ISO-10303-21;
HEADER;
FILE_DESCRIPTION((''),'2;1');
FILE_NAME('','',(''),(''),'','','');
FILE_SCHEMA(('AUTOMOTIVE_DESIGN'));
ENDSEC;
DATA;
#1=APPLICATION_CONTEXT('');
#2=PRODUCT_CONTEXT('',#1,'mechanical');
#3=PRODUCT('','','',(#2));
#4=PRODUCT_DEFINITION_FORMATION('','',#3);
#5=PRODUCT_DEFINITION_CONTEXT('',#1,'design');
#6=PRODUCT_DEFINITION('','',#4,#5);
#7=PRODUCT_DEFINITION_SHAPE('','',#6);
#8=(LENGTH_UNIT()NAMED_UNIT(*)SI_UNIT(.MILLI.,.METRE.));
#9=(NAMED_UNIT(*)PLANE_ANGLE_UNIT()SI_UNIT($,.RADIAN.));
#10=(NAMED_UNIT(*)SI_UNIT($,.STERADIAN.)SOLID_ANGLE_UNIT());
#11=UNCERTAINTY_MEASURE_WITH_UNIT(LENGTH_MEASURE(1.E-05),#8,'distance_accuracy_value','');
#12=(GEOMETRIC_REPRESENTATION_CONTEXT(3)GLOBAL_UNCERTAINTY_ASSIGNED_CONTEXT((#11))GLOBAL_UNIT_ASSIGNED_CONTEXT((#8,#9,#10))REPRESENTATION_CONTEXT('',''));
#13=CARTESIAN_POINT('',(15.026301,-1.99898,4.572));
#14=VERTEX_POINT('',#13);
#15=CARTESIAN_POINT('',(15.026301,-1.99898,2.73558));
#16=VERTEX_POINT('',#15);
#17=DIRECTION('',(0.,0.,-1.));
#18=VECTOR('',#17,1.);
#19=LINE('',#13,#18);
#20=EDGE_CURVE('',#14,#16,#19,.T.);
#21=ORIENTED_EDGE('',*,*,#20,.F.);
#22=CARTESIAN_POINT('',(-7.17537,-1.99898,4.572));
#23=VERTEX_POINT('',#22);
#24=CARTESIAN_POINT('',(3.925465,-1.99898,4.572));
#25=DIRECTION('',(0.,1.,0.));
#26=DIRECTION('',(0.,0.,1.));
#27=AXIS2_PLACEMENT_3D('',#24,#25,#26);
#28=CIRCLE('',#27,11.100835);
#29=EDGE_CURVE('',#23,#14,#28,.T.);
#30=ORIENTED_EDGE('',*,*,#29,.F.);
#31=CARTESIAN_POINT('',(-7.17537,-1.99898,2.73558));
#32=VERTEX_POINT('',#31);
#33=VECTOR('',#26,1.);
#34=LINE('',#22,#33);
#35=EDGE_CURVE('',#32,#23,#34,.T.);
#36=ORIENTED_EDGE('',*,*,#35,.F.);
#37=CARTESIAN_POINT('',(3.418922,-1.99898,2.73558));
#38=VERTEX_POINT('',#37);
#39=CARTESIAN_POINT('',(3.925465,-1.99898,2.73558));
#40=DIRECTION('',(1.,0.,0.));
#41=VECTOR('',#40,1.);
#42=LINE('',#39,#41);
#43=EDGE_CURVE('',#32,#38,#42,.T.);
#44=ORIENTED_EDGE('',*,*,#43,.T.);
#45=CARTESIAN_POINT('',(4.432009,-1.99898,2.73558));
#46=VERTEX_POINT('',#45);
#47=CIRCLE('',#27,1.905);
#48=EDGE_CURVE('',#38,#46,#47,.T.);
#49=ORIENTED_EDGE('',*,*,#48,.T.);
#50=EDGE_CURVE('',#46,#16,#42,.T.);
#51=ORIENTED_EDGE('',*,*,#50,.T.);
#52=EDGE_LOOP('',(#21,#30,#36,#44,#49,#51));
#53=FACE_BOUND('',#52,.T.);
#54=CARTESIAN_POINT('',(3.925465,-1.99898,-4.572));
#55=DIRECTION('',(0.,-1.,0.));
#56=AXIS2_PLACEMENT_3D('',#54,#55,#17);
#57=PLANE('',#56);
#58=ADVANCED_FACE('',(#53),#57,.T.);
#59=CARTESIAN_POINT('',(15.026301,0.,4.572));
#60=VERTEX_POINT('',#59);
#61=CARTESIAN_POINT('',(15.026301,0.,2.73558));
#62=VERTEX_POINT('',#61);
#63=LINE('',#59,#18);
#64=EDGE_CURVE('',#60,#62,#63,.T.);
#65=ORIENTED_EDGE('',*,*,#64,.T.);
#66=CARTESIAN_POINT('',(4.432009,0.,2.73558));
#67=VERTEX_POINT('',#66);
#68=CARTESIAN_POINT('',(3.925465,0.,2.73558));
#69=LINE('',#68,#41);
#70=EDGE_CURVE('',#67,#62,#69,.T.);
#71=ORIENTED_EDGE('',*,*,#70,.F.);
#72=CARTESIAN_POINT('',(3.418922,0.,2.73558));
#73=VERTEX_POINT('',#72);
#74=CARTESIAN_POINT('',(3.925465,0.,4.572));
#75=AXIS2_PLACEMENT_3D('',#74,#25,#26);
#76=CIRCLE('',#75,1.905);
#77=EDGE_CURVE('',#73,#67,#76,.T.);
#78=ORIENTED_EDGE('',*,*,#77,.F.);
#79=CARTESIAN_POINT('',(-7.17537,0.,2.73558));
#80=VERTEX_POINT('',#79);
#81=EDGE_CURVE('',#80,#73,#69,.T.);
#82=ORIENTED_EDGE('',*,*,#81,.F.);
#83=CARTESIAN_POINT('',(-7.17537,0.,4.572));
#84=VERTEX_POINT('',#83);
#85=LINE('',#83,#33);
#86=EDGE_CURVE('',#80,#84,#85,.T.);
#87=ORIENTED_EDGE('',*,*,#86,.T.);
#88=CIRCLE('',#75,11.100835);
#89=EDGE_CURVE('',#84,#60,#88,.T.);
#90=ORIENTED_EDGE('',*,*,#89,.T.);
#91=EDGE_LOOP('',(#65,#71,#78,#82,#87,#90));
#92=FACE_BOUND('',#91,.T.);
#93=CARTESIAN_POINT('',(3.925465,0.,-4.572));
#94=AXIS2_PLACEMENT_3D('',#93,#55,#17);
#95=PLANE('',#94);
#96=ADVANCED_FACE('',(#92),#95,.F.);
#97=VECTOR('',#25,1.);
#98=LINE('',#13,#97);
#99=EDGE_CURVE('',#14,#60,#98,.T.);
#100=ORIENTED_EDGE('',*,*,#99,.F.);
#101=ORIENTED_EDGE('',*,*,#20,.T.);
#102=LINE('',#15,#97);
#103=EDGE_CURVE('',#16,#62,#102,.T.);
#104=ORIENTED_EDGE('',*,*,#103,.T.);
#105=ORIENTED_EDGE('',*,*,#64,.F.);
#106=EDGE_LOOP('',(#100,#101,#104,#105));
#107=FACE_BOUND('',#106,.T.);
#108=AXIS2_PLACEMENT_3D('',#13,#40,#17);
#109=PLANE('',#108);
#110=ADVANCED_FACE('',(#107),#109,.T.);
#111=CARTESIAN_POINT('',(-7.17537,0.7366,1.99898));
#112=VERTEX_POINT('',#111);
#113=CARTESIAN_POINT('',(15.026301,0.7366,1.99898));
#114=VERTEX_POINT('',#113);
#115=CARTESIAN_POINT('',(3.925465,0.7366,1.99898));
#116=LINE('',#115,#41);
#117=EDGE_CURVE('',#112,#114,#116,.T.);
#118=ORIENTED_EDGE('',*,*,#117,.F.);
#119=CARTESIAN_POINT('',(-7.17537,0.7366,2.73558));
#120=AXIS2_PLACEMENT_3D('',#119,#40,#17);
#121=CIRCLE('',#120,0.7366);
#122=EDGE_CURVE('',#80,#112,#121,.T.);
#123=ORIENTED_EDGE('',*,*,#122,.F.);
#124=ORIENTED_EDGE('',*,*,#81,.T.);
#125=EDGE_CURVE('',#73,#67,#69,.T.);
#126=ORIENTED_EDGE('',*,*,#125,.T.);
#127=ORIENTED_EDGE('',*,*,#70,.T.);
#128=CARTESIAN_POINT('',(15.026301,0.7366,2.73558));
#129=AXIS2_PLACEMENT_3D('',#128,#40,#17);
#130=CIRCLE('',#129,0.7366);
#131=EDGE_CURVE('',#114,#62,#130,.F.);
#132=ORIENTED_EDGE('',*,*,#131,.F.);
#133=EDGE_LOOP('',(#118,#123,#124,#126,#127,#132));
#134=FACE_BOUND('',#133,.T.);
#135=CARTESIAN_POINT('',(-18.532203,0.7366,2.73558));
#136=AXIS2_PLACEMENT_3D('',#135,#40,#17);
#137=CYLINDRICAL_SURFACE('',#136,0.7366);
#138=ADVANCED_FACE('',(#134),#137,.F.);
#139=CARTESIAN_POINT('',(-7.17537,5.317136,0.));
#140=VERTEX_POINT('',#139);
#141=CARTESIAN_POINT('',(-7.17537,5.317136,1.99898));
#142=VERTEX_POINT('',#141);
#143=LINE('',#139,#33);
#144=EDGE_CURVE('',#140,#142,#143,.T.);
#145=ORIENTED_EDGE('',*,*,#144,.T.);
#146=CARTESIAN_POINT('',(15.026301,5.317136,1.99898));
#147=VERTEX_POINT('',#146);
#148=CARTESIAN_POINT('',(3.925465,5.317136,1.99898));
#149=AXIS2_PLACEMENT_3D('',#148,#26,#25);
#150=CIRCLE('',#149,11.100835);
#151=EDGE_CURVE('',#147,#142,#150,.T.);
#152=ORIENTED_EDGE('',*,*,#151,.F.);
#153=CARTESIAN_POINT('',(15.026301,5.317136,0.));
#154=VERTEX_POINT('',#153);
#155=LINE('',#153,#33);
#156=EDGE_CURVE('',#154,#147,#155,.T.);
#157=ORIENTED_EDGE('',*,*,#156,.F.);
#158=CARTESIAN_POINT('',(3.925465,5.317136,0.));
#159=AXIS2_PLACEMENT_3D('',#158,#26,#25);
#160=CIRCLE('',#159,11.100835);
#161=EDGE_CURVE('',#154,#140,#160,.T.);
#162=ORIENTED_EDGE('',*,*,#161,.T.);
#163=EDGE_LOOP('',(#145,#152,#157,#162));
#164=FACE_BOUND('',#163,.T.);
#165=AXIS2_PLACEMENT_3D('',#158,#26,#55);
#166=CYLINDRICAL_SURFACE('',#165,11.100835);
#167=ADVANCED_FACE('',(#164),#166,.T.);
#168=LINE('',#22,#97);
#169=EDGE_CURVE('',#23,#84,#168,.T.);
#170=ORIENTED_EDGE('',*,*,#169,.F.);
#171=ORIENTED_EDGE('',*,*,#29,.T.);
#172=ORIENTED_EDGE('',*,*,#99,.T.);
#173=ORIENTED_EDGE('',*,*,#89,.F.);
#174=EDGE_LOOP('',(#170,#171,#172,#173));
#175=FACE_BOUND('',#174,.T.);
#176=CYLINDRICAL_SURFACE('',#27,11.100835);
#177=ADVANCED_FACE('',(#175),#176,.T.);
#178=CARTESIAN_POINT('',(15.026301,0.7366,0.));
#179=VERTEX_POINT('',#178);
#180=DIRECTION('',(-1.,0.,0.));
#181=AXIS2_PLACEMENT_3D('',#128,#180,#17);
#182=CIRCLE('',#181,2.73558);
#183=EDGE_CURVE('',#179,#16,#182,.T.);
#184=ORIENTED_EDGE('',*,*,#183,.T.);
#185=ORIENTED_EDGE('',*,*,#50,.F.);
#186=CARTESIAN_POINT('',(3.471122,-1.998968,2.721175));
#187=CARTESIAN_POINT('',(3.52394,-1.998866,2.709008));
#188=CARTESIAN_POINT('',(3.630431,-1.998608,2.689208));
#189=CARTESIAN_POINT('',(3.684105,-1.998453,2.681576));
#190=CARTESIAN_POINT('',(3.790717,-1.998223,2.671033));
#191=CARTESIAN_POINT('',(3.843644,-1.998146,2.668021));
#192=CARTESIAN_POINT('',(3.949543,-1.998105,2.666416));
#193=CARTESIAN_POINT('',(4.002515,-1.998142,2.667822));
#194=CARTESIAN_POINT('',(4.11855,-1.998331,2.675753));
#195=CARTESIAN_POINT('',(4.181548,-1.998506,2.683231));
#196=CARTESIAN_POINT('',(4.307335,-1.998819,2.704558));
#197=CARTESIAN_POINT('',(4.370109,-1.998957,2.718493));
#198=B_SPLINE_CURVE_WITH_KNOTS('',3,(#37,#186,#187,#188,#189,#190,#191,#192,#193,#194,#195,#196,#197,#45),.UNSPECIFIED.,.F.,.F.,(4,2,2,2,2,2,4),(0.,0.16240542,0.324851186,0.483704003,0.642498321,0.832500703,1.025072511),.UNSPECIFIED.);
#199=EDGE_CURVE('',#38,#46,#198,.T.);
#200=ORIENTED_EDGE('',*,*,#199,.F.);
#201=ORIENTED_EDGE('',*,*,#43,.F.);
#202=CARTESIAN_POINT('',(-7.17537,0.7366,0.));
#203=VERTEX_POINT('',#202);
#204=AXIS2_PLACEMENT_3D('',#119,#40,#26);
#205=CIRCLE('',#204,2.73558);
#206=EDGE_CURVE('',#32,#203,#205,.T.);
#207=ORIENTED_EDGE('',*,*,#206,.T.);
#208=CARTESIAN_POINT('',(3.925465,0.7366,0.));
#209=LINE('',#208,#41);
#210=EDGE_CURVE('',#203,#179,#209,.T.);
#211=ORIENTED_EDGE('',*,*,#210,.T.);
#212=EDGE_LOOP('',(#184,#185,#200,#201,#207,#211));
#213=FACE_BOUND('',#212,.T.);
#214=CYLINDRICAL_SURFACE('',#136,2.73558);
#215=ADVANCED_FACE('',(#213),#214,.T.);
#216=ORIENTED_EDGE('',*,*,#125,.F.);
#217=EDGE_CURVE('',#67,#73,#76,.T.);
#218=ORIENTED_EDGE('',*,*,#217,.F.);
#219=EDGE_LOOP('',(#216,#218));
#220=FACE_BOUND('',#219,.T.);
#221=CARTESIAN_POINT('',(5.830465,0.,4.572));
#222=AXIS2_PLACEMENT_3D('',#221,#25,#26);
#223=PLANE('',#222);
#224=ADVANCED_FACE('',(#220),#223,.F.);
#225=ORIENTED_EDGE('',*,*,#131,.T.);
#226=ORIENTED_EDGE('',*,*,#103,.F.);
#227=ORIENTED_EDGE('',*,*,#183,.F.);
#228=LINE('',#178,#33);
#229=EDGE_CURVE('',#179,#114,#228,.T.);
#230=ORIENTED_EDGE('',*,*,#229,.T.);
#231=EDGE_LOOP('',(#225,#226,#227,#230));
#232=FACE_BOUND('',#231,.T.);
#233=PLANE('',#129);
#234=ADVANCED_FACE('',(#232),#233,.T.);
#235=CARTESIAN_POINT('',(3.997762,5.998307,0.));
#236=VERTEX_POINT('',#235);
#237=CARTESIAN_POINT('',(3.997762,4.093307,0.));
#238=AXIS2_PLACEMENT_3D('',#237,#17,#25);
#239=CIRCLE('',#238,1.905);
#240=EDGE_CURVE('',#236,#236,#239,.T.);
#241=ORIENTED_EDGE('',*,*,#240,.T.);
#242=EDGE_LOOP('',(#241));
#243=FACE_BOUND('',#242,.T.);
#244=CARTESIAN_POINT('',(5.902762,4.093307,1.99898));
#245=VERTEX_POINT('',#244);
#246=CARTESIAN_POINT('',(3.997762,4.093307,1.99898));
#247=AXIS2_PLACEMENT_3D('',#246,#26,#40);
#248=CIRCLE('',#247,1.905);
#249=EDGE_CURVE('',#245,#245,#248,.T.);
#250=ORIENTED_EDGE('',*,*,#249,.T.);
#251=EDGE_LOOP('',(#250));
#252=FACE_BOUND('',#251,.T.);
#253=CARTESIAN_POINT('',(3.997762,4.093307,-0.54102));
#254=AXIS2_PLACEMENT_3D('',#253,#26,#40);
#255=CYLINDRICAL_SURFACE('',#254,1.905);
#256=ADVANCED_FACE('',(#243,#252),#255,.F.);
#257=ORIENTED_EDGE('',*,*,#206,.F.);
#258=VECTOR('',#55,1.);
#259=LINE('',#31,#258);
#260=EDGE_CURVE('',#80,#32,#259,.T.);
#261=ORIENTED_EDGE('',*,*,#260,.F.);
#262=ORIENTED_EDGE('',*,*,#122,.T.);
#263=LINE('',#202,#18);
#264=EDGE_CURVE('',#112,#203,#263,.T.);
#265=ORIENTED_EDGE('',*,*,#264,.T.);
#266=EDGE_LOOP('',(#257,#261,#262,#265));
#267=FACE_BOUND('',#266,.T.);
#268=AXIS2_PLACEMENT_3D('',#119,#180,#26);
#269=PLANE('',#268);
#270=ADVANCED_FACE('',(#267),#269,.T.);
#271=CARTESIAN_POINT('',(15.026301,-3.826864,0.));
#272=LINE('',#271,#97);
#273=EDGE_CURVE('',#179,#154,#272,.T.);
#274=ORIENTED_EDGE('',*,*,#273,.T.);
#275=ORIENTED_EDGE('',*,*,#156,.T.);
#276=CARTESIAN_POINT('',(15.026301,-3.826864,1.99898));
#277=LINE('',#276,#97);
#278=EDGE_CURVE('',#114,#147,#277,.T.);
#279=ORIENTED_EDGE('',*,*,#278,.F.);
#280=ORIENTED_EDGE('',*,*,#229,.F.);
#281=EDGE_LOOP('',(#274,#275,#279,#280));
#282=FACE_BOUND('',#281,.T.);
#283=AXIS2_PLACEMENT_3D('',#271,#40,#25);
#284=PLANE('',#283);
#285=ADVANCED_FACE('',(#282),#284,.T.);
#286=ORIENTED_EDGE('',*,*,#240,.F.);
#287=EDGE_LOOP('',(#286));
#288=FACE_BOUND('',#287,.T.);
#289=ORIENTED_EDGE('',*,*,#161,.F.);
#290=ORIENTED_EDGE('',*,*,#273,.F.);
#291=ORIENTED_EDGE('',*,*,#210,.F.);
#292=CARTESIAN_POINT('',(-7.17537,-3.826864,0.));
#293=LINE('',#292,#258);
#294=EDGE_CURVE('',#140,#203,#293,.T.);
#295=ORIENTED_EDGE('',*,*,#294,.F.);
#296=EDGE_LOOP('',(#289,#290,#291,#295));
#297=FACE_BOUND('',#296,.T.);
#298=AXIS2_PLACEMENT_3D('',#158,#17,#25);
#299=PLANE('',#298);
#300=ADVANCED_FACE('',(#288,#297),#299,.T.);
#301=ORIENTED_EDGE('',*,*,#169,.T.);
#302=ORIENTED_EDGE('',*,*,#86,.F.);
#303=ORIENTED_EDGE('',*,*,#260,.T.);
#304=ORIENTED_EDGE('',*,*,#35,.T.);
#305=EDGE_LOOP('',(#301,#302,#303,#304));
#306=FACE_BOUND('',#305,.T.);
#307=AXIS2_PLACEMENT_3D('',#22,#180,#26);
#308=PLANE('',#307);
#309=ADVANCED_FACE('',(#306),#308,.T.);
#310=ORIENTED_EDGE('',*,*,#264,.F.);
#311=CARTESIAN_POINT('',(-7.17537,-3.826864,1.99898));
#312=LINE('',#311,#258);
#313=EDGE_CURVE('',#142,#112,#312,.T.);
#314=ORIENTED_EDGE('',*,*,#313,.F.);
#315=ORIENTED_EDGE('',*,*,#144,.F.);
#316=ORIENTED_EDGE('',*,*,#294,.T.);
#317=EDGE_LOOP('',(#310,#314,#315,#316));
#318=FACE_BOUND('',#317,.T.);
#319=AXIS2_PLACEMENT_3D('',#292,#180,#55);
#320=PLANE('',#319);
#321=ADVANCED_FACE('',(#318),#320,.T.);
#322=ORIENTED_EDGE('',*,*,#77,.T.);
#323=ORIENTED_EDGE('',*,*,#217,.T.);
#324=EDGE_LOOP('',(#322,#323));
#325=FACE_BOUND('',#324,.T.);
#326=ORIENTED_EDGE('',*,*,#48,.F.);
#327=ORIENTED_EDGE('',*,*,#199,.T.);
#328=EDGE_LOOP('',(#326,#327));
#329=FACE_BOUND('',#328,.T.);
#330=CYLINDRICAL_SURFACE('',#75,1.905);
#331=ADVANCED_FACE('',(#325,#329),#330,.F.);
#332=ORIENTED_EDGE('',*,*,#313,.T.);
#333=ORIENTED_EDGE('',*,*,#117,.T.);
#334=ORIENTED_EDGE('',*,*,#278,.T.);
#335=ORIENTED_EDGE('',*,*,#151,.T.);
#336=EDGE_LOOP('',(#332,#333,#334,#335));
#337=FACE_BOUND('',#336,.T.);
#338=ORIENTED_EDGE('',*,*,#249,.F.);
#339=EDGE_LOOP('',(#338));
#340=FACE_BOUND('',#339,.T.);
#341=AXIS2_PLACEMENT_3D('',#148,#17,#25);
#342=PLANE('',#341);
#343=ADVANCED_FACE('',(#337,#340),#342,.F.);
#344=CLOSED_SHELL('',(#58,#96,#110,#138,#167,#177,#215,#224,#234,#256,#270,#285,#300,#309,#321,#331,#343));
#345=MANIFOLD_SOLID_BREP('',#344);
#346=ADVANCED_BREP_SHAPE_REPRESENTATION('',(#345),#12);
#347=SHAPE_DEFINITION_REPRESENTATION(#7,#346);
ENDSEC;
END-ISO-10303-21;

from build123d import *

# Parameters (mm, degrees)
BASE_FLANGE1_DEPTH       = 1.99898
SKETCHED_START           = -17
SKETCHED_BEND1_OUTLINE_W = 22.201670932
SKETCHED_BEND1_OUTLINE_H = 1.99898
SKETCHED_BEND1_DEPTH     = 17.02505456
SKETCHED_START_2         = 0.266062511
SKETCHED_BEND1_2_DEPTH   = 1.732917489
SKETCHED_BEND1_3_DEPTH   = 2.73558
SKETCHED_START_3         = -7.17537008
SKETCHED_BEND1_4_DEPTH   = 22.201670932
SKETCH21_W               = 1.905
SKETCH21_H               = 1.99898
SKETCH17_R               = 1.905
CUT_EXTRUDE4_DEPTH       = 2.54


with BuildPart() as part:
    # Base-Flange1: sheet metal written as solids
    # Sketch1 → Base-Flange1 (new body)
    with BuildSketch(Plane(origin=(0, 0, 0), x_dir=(1, 0, 0), z_dir=(0, 1, 0))):
        with BuildLine():
            Line((15.026300852, -4.572), (15.026300852, 4.572))
            ThreePointArc((15.026300852, 4.572), (3.925465386, 15.672835466), (-7.17537008, 4.572))
            Line((-7.17537008, 4.572), (-7.17537008, -4.572))
            ThreePointArc((-7.17537008, -4.572), (3.925465386, -15.672835466), (15.026300852, -4.572))
        make_face()
    extrude(amount=-BASE_FLANGE1_DEPTH)

    # Sketched Bend1: read off the stored shape, not the designer's step
    # Sketched Bend1 outline → Sketched Bend1 (cut)
    with BuildSketch(Plane.XY.offset(SKETCHED_START)):
        with Locations((3.925465386, -0.99949)):
            Rectangle(SKETCHED_BEND1_OUTLINE_W, SKETCHED_BEND1_OUTLINE_H)
    extrude(amount=SKETCHED_BEND1_DEPTH, mode=Mode.SUBTRACT)

    # Sketched Bend1 2 outline → Sketched Bend1 2 (add)
    with BuildSketch(Plane.XY.offset(SKETCHED_START_2)):
        with BuildLine():
            Line((15.026300852, 0), (15.026300852, 5.317136205))
            ThreePointArc((15.026300852, 5.317136205), (3.925465386, 16.417971671), (-7.17537008, 5.317136205))
            Line((-7.17537008, 5.317136205), (-7.17537008, 0))
            Line((-7.17537008, 0), (15.026300852, 0))
        make_face()
    extrude(amount=SKETCHED_BEND1_2_DEPTH)

    # Sketched Bend1 3 outline → Sketched Bend1 3 (add)
    with BuildSketch(Plane.XY):
        with BuildLine():
            Line((15.026300852, 0), (15.026300852, 5.317136205))
            ThreePointArc((15.026300852, 5.317136205), (3.925465386, 16.417971671), (-7.17537008, 5.317136205))
            Line((-7.17537008, 5.317136205), (-7.17537008, 0))
            Line((-7.17537008, 0), (15.026300852, 0))
        make_face()
    extrude(amount=SKETCHED_BEND1_3_DEPTH)

    # Sketched Bend1 4 outline → Sketched Bend1 4 (cut)
    with BuildSketch(Plane.YZ.offset(SKETCHED_START_3)):
        with BuildLine():
            ThreePointArc((0, 2.73558), (0.215745145, 2.214725145), (0.7366, 1.99898))
            Line((0.7366, 1.99898), (18, 1.99898))
            Line((18, 1.99898), (18, 2.73558))
            Line((18, 2.73558), (0, 2.73558))
        make_face()
        with BuildLine():
            Line((18, -2), (18, -1e-08))
            Line((18, -1e-08), (0.7366, 0))
            ThreePointArc((0.7366, 0), (-1.197747168, 0.801232832), (-1.99898, 2.73558))
            Line((-1.99898, 2.73558), (-1.99898, 0.02505456))
            Line((-1.99898, 0.02505456), (0, 0.02505456))
            Line((0, 0.02505456), (0, -2))
            Line((0, -2), (18, -2))
        make_face()
    extrude(amount=SKETCHED_BEND1_4_DEPTH, mode=Mode.SUBTRACT)

    # Sketch21 → Hole1 (revolve, cut)
    with BuildSketch(Plane(origin=(3.925465386, 0, 4.572), x_dir=(0, 0, 1), z_dir=(1, 0, 0))):
        with Locations((0.9525, 0.99949)):
            Rectangle(SKETCH21_W, SKETCH21_H)
    revolve(axis=Axis((3.925465386, -110, 4.572), (0, 1, 0)), mode=Mode.SUBTRACT)

    # Sketch17 → Cut-Extrude4 (cut)
    with BuildSketch(Plane.XY.offset(1.99898)):
        with Locations((3.997762003, 4.09330652)):
            Circle(SKETCH17_R)
    extrude(amount=-CUT_EXTRUDE4_DEPTH, mode=Mode.SUBTRACT)


solid = part.part
